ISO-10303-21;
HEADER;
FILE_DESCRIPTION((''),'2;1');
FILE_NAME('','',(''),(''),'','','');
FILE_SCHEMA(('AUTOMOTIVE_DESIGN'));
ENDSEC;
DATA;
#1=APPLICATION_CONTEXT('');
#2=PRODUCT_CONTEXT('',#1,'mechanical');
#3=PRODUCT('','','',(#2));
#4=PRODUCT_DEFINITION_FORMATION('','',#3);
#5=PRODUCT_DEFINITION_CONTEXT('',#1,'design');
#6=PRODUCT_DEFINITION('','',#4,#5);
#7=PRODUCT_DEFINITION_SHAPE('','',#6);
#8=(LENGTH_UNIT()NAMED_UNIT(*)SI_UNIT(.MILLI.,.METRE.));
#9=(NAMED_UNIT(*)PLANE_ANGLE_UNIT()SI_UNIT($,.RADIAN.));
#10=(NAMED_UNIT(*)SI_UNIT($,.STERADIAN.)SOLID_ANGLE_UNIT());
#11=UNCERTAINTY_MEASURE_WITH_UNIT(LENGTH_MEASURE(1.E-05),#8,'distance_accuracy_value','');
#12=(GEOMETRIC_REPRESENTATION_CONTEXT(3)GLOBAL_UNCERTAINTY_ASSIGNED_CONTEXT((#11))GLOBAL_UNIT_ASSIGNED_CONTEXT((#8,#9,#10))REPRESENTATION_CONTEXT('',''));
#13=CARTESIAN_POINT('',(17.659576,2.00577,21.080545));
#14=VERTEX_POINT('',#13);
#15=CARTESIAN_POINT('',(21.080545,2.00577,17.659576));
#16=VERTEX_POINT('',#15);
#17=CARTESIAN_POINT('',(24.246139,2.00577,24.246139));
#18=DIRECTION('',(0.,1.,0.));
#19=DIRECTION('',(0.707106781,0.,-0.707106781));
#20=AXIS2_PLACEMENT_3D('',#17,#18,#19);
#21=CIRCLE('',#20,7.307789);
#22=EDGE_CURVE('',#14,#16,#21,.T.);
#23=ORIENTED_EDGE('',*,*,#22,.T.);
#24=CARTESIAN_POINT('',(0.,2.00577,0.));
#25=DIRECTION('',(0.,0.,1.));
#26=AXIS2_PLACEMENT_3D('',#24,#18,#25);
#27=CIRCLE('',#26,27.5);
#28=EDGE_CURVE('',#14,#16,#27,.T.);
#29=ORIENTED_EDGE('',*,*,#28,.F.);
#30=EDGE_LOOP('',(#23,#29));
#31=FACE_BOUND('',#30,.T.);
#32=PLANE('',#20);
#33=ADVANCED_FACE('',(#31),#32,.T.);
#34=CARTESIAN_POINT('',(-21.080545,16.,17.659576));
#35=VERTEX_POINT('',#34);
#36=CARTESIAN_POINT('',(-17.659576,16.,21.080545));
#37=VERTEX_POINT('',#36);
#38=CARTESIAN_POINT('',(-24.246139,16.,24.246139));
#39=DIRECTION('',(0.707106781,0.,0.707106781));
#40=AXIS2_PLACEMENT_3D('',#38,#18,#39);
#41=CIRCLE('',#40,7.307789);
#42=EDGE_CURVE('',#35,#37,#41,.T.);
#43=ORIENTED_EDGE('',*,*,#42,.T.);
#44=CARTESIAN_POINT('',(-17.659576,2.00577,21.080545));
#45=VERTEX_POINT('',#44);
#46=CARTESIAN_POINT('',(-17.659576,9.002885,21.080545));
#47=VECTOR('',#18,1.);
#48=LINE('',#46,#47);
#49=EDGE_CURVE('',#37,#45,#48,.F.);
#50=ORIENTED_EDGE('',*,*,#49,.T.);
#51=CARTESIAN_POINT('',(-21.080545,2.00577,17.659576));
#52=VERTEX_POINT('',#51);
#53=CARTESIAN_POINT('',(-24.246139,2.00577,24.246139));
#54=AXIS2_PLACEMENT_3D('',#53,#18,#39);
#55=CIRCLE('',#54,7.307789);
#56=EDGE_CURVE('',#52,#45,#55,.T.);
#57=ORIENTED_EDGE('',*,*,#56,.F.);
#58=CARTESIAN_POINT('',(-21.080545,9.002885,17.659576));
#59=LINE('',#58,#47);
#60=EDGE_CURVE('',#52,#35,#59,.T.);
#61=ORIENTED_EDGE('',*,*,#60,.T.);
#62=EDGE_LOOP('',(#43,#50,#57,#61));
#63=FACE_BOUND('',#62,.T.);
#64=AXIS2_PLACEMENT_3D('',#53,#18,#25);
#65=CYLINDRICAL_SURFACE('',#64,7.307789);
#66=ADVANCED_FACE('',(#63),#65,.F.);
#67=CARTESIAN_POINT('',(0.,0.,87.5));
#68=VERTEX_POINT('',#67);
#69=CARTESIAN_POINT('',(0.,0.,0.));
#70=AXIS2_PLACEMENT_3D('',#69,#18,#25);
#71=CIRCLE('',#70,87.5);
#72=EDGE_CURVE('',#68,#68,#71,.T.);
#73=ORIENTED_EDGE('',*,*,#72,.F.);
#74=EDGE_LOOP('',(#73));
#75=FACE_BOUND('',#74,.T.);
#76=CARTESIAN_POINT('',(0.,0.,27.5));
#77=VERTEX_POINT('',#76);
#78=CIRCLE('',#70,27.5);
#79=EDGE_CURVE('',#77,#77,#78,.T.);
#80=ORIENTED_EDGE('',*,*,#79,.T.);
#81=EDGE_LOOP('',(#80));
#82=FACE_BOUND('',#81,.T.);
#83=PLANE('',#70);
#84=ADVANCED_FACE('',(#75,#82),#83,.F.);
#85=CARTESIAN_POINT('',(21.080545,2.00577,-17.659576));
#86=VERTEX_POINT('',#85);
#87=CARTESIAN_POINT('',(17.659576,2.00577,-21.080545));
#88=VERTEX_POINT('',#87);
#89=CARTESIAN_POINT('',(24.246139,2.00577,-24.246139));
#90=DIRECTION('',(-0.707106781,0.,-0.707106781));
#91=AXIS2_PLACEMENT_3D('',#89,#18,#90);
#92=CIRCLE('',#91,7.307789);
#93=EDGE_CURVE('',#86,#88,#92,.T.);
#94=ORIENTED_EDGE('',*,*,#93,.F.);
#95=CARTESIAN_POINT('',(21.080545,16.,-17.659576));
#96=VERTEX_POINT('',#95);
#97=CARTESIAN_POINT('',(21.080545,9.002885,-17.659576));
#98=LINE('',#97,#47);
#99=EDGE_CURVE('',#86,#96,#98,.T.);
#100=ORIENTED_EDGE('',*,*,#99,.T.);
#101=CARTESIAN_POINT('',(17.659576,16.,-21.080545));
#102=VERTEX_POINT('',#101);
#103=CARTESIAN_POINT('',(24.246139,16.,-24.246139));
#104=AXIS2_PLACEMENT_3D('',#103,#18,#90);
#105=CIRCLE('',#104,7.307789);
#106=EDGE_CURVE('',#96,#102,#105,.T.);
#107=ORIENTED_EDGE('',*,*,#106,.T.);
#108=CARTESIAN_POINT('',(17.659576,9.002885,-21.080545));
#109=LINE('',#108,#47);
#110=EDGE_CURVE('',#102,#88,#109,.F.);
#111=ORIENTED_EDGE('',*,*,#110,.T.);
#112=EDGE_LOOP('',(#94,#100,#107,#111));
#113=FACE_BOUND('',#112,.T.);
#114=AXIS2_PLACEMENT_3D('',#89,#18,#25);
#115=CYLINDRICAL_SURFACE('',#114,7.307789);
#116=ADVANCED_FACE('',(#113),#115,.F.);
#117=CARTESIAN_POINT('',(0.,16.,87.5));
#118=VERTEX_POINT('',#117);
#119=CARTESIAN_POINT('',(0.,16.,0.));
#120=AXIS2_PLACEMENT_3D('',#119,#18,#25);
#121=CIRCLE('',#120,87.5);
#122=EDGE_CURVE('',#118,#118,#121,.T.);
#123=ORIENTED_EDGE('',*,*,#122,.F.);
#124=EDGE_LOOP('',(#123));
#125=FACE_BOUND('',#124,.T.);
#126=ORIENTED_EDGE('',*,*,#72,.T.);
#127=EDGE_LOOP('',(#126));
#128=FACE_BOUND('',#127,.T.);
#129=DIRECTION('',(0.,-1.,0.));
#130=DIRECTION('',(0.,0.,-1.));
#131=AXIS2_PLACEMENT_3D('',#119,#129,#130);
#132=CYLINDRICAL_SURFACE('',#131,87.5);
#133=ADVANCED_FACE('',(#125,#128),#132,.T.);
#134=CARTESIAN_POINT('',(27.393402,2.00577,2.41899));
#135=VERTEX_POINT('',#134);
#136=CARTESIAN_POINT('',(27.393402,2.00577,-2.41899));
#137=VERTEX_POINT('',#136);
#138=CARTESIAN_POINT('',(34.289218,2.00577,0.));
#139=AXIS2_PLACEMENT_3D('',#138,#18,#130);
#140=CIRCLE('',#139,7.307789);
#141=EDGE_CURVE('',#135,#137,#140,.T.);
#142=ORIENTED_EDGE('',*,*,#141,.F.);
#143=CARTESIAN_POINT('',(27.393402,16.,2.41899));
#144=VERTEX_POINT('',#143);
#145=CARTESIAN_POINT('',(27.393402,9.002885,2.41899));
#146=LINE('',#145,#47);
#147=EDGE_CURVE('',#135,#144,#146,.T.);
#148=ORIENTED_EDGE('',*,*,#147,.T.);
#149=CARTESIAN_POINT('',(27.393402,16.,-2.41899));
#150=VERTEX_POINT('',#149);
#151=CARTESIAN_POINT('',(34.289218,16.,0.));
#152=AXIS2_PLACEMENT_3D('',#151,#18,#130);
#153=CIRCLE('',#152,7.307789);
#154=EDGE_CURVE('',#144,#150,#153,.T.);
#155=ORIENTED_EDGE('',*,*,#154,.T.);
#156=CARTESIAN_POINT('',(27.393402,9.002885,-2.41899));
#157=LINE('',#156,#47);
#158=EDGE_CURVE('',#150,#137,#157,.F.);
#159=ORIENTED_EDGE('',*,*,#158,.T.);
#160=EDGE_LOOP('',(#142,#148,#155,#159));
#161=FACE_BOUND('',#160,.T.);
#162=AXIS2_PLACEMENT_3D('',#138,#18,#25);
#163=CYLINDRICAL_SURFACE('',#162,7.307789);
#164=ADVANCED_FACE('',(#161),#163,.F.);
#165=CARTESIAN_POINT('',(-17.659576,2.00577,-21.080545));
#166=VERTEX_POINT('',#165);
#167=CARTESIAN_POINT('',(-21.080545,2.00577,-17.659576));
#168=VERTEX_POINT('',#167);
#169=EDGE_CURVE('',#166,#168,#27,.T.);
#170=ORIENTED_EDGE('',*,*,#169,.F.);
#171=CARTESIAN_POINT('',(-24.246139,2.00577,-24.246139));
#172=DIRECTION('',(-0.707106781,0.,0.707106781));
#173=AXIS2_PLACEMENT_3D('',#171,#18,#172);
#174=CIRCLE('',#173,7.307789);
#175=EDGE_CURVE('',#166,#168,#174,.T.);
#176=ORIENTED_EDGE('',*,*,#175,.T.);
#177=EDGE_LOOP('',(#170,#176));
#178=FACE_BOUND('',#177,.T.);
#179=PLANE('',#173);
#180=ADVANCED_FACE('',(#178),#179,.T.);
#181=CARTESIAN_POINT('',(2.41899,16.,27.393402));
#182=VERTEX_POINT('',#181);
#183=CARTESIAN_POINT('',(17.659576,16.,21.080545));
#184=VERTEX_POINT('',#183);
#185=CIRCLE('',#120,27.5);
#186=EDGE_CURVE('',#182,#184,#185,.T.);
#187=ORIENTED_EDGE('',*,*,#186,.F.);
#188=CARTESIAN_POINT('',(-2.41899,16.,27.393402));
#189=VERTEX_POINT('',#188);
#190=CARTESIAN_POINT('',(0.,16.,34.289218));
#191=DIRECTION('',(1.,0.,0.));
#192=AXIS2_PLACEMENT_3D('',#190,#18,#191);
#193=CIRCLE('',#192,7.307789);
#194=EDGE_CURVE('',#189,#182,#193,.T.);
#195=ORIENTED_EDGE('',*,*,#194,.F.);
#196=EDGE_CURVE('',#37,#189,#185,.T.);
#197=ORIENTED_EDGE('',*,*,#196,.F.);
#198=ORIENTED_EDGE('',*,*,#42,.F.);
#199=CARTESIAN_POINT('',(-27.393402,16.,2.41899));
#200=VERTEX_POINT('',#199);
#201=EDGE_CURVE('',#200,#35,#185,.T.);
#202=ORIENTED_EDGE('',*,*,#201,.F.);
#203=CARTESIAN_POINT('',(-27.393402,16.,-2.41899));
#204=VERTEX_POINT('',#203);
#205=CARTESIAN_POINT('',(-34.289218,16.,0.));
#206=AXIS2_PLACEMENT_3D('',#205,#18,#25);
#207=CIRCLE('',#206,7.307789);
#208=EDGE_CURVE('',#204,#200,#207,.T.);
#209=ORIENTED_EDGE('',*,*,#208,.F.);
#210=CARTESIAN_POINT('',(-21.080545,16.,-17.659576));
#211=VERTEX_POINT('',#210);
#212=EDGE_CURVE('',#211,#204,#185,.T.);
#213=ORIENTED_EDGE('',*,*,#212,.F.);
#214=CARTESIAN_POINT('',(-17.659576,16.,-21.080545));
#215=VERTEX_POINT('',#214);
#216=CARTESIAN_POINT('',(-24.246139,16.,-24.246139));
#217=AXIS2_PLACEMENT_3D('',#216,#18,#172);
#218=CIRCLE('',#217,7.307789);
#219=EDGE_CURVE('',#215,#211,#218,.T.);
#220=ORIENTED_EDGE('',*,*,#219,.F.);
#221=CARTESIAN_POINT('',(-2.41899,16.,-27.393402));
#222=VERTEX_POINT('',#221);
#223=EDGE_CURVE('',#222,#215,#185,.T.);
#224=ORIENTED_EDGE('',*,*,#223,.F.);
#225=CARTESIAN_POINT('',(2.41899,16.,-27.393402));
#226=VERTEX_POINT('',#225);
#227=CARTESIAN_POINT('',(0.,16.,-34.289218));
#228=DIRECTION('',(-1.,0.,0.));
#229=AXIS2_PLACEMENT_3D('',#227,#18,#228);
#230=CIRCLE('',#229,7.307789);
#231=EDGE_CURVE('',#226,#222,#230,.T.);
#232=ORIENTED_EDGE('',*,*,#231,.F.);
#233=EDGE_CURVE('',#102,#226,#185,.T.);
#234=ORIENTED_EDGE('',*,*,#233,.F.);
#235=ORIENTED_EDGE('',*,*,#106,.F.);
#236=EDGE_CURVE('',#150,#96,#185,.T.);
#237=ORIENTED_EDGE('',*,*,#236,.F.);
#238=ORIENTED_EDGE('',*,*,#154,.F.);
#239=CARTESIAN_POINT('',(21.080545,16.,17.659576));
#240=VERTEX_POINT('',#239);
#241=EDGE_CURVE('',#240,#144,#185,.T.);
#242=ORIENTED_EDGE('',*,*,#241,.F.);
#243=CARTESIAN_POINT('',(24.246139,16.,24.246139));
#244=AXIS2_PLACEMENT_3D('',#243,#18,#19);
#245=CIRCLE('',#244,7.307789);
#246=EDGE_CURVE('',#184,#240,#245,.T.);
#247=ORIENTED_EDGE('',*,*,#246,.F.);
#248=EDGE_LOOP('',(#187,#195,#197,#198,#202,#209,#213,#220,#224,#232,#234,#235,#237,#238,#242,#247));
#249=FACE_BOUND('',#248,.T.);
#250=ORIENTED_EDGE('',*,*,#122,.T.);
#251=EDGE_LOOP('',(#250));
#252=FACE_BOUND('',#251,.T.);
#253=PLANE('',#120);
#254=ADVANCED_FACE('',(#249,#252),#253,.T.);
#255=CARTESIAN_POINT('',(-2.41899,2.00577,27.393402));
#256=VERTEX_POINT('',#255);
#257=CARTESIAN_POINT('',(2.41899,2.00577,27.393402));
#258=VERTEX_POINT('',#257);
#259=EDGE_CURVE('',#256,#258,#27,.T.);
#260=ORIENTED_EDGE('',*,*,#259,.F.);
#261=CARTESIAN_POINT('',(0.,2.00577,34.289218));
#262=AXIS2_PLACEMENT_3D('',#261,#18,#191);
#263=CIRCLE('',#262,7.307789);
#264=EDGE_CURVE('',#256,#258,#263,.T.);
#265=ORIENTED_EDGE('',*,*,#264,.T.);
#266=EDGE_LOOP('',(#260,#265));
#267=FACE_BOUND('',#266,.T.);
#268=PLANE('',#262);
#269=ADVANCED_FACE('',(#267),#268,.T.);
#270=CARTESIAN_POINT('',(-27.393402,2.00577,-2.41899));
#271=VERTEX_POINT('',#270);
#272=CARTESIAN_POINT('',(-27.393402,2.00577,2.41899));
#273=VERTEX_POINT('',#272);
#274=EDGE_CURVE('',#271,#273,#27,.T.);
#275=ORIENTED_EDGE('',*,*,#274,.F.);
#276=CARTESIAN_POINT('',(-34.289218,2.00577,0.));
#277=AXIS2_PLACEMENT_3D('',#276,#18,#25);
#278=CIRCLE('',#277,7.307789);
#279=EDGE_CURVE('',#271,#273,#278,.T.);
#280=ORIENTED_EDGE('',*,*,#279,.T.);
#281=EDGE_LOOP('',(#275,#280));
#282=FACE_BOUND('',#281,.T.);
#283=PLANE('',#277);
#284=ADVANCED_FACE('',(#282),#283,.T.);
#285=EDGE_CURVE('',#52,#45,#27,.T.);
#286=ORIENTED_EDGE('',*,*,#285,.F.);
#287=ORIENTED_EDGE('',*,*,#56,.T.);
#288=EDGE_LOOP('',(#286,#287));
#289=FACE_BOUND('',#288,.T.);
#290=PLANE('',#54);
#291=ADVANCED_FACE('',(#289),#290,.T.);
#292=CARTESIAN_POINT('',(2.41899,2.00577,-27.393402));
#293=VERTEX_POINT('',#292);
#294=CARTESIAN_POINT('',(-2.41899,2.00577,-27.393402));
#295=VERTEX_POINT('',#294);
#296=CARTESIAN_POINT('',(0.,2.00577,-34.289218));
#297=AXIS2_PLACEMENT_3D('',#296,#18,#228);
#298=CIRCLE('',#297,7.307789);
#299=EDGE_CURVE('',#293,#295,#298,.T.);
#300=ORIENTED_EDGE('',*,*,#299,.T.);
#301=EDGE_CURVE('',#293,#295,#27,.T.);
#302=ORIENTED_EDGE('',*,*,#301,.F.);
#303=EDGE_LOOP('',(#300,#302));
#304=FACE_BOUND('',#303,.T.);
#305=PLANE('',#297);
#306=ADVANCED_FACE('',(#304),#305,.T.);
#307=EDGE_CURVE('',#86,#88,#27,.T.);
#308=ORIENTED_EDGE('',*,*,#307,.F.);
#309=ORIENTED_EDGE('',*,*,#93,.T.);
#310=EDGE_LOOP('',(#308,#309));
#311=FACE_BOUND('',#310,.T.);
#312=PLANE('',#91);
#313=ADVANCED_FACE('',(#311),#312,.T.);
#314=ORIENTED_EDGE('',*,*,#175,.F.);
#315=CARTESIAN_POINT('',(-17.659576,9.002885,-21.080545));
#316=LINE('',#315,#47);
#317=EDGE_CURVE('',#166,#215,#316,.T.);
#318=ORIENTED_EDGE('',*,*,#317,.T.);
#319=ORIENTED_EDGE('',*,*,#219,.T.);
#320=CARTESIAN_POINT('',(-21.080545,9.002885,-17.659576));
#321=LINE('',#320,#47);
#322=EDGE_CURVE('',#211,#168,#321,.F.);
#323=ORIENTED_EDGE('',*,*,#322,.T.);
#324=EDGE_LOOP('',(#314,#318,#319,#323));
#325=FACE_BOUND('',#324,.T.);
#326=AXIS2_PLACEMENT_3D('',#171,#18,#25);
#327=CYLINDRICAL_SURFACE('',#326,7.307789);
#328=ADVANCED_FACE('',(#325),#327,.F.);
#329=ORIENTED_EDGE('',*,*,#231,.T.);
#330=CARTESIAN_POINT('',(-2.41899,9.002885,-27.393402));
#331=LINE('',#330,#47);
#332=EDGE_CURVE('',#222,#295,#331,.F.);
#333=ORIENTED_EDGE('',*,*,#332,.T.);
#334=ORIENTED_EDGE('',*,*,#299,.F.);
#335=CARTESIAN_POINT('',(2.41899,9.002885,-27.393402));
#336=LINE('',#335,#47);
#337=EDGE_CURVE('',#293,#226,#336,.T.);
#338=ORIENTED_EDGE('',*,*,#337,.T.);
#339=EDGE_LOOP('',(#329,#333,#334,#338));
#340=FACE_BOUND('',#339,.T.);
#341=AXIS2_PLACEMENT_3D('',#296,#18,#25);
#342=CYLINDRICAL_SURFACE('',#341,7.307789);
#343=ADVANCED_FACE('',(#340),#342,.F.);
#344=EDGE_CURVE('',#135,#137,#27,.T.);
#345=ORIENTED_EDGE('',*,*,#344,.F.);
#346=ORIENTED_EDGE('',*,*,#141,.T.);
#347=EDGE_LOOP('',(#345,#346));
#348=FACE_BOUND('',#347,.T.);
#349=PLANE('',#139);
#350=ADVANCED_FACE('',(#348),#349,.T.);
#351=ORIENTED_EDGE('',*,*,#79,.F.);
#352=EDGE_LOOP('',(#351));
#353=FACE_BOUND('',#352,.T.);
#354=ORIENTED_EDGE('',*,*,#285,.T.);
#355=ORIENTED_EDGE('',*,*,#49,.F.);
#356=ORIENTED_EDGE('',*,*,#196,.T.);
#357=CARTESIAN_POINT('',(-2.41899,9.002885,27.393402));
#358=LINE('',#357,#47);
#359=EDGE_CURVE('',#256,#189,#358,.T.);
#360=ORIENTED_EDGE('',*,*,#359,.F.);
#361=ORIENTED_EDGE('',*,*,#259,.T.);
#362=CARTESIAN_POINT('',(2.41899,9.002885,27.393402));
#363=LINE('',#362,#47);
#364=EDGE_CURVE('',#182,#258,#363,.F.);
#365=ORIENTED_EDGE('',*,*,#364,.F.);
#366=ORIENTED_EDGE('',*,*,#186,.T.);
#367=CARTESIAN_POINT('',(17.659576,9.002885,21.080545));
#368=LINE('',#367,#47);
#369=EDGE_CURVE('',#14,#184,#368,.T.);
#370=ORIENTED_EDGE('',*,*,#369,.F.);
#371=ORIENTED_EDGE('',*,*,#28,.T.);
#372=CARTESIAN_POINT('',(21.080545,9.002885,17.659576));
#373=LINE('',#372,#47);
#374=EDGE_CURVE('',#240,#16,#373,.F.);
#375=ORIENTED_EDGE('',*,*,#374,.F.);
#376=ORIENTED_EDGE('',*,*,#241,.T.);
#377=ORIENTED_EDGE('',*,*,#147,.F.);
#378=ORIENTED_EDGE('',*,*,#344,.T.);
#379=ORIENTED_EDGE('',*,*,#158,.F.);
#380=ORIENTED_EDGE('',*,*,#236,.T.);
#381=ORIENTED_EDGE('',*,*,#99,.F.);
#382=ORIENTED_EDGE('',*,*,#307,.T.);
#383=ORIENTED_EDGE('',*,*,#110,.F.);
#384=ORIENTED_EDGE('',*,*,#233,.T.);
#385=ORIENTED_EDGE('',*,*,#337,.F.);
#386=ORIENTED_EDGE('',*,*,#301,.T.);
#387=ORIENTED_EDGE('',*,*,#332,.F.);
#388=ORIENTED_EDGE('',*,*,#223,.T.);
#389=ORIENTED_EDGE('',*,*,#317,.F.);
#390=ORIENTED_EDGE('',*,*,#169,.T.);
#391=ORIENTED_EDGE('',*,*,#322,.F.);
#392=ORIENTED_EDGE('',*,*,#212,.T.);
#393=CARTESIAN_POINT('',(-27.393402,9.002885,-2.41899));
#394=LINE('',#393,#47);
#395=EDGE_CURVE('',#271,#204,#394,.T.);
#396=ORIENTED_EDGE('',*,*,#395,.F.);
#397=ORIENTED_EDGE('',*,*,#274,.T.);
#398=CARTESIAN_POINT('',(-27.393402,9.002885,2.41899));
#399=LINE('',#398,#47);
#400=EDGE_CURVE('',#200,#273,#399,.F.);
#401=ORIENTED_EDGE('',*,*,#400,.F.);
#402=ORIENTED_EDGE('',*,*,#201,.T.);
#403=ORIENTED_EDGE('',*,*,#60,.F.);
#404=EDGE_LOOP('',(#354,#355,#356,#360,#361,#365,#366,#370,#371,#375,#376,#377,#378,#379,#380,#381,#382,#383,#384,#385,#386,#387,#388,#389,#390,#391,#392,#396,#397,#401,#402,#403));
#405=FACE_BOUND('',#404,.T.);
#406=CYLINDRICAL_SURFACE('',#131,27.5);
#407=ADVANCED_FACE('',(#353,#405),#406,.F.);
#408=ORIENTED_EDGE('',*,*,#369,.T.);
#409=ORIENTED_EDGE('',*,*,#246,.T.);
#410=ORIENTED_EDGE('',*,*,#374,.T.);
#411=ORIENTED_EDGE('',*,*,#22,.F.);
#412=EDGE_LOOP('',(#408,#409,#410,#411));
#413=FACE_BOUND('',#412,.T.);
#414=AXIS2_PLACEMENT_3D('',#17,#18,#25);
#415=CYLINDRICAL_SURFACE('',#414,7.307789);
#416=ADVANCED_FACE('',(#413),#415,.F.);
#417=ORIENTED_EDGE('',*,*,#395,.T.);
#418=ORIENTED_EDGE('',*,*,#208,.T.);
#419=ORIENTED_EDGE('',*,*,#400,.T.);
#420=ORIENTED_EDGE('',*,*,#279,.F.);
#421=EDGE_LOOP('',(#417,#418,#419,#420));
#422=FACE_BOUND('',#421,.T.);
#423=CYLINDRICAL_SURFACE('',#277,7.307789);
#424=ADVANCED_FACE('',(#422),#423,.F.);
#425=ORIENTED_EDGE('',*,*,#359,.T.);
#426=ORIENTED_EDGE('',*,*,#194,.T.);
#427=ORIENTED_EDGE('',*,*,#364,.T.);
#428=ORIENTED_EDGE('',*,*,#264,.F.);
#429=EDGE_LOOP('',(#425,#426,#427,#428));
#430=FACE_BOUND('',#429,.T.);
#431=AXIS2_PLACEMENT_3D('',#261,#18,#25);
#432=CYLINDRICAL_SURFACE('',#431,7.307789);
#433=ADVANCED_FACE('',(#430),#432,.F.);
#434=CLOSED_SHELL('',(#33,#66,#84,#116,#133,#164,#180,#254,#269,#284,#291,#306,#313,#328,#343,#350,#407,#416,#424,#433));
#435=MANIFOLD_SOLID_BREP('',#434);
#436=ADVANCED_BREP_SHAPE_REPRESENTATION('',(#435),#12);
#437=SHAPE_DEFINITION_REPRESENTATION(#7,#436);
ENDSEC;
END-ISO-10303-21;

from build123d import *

# Parameters (mm, degrees)
SKETCH1_R           = 87.5
BOSS_EXTRUDE1_DEPTH = 16
SKETCH2_R           = 27.5
CUT_EXTRUDE1_DEPTH  = 125.773795326
SKETCH3_R           = 7.307789365
CUT_EXTRUDE2_DEPTH  = 13.994230173
CIRPATTERN1_COUNT   = 8


with BuildPart() as part:
    # Sketch1 → Boss-Extrude1 (new body)
    with BuildSketch(Plane(origin=(0, 0, 0), x_dir=(1, 0, 0), z_dir=(0, 1, 0))):
        Circle(SKETCH1_R)
    extrude(amount=BOSS_EXTRUDE1_DEPTH)

    # Sketch2 → Cut-Extrude1 (cut, through all)
    with BuildSketch(Plane(origin=(0, 0, 0), x_dir=(1, 0, 0), z_dir=(0, 1, 0))):
        Circle(SKETCH2_R)
    extrude(amount=CUT_EXTRUDE1_DEPTH, mode=Mode.SUBTRACT)

    # Sketch3 → Cut-Extrude2 (cut)
    with BuildSketch(Plane(origin=(0, 16, 0), x_dir=(1, 0, 0), z_dir=(0, 1, 0))):
        with Locations((-34.289217919, 0)):
            Circle(SKETCH3_R)
    cut_extrude2 = extrude(amount=-CUT_EXTRUDE2_DEPTH, mode=Mode.SUBTRACT)

    # CirPattern1: Cut-Extrude2 ×8 about axis
    cirpattern1_axis = Axis((0, 0, 0), (0, 1, 0))
    for i in range(1, CIRPATTERN1_COUNT):
        add(cut_extrude2.rotate(cirpattern1_axis, i * 360 / CIRPATTERN1_COUNT), mode=Mode.SUBTRACT)


solid = part.part
